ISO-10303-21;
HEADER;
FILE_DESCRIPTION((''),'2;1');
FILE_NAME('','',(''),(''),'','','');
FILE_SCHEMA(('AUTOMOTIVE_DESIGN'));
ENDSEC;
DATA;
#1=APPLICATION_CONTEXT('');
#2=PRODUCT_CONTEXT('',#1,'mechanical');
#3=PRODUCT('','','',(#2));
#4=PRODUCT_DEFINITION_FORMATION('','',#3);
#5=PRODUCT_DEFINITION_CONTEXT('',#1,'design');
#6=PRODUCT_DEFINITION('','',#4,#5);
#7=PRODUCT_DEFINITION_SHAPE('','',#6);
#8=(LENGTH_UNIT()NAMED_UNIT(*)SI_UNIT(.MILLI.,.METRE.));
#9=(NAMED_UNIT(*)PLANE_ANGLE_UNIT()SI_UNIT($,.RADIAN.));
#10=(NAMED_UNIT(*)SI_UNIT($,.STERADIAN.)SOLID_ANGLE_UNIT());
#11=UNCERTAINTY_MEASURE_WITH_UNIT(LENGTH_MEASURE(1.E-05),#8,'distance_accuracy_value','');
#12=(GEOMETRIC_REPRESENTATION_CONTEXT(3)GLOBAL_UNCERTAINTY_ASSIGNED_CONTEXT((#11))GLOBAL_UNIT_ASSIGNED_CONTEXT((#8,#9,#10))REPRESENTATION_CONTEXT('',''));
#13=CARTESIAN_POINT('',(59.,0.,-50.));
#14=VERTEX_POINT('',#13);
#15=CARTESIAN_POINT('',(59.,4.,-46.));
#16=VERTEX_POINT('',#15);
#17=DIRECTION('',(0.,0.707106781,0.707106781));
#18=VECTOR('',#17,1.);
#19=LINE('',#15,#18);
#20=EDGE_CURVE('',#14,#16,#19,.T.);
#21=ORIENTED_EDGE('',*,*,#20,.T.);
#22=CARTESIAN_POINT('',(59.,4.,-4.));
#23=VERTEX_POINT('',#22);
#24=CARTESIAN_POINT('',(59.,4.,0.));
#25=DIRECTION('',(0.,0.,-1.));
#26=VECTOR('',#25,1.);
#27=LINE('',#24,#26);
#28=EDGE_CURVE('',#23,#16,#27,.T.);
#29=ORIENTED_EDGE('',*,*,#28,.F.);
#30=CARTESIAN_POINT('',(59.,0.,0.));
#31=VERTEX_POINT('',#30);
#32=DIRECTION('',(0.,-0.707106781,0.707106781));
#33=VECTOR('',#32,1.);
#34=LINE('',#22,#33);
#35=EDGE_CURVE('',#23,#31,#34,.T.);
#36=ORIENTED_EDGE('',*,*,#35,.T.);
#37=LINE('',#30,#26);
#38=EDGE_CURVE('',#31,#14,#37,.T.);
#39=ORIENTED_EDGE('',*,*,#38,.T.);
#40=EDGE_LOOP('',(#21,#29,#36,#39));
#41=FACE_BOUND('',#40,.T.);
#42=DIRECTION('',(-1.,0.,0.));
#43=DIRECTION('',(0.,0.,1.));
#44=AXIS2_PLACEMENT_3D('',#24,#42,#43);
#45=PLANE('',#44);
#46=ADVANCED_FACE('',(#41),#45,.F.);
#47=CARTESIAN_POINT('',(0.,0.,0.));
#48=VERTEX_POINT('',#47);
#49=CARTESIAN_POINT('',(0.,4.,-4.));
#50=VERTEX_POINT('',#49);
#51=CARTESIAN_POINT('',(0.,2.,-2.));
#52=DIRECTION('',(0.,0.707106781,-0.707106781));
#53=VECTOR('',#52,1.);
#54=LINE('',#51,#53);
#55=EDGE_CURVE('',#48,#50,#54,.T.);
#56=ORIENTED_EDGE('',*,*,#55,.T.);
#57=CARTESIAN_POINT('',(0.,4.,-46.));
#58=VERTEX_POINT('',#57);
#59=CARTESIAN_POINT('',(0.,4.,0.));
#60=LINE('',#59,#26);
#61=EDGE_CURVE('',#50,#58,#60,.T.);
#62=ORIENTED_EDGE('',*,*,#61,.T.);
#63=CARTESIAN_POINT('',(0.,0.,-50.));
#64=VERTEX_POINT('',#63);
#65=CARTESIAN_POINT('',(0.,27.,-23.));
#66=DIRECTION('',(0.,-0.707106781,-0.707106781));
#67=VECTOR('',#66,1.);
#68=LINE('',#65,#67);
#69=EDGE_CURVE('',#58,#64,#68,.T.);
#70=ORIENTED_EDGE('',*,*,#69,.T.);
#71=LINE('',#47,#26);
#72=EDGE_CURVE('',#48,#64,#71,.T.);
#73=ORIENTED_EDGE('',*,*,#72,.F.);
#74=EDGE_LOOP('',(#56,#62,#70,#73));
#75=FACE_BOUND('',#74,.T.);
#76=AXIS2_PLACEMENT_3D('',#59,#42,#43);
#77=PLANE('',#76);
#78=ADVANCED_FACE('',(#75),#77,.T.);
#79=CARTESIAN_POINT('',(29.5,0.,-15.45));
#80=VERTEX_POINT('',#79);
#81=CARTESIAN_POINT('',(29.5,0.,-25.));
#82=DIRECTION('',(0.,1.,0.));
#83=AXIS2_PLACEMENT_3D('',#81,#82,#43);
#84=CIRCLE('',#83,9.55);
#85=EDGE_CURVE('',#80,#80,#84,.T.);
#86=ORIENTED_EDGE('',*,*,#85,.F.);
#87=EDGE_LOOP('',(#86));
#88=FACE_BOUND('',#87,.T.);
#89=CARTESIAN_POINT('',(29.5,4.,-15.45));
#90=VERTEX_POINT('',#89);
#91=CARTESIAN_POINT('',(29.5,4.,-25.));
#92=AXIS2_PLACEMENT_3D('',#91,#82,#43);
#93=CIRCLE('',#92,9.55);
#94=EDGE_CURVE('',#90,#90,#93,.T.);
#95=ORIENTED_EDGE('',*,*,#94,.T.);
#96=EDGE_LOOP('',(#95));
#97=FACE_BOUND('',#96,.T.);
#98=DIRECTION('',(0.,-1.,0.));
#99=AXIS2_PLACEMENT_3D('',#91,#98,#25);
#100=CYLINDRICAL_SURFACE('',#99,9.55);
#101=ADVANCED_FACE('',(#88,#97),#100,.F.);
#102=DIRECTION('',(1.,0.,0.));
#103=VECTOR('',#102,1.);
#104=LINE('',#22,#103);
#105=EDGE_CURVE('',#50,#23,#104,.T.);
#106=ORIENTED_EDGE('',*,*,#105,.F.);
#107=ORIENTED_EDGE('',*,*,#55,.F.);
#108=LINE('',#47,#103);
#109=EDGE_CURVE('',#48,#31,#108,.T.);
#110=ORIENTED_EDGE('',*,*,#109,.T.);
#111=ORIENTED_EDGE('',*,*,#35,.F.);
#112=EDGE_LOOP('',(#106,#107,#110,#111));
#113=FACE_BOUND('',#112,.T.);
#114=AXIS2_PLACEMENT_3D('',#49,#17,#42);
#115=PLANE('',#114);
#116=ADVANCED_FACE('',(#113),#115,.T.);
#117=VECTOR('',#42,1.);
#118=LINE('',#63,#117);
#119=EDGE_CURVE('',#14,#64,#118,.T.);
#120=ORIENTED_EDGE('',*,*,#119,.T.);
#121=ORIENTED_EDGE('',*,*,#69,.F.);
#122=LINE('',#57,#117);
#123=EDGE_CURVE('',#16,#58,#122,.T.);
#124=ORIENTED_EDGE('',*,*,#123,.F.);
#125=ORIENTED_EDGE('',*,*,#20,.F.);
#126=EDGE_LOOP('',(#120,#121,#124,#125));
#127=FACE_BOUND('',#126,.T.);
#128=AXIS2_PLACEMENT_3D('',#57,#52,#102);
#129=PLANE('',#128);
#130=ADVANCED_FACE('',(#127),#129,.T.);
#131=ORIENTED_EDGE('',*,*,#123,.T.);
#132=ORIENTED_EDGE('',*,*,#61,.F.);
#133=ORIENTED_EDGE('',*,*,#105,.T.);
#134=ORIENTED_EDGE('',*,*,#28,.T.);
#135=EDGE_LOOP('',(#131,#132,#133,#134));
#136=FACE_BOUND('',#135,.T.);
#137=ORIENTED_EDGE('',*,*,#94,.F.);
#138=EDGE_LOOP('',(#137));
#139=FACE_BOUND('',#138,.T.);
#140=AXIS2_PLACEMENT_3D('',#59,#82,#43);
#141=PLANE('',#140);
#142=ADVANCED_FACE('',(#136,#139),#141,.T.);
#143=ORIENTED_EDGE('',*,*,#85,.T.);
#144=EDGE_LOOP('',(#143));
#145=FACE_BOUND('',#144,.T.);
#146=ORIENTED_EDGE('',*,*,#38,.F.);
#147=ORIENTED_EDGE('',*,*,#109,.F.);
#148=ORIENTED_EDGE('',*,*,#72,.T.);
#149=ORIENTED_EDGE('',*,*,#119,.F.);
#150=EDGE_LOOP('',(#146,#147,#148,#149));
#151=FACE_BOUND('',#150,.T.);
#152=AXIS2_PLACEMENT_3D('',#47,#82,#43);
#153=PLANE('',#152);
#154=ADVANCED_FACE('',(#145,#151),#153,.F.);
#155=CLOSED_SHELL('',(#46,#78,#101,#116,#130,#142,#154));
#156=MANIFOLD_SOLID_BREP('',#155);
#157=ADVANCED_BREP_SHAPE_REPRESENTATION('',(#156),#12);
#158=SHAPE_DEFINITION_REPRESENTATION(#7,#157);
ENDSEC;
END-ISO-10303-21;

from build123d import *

# Parameters (mm, degrees)
SKETCH1_W           = 59
SKETCH1_H           = 50
SKETCH1_R           = 9.55
BOSS_EXTRUDE1_DEPTH = 4
CHAMFER1_SIZE       = 4


with BuildPart() as part:
    # Sketch1 → Boss-Extrude1 (new body)
    with BuildSketch(Plane(origin=(0, 0, 0), x_dir=(1, 0, 0), z_dir=(0, 1, 0))):
        with Locations((29.5, 25)):
            Rectangle(SKETCH1_W, SKETCH1_H)
        with Locations(Location((29.5, 25, 0), (0, 0, 270))):
            Circle(SKETCH1_R, mode=Mode.SUBTRACT)
    extrude(amount=BOSS_EXTRUDE1_DEPTH)

    # Chamfer1
    chamfer1_edges = [part.edges().sort_by_distance(p)[0] for p in [
        (29.5, 4, -50),
        (29.5, 4, 0),
    ]]
    chamfer(chamfer1_edges, length=CHAMFER1_SIZE - 0.0001)  # a hair under: the kernel refuses the full size


solid = part.part
